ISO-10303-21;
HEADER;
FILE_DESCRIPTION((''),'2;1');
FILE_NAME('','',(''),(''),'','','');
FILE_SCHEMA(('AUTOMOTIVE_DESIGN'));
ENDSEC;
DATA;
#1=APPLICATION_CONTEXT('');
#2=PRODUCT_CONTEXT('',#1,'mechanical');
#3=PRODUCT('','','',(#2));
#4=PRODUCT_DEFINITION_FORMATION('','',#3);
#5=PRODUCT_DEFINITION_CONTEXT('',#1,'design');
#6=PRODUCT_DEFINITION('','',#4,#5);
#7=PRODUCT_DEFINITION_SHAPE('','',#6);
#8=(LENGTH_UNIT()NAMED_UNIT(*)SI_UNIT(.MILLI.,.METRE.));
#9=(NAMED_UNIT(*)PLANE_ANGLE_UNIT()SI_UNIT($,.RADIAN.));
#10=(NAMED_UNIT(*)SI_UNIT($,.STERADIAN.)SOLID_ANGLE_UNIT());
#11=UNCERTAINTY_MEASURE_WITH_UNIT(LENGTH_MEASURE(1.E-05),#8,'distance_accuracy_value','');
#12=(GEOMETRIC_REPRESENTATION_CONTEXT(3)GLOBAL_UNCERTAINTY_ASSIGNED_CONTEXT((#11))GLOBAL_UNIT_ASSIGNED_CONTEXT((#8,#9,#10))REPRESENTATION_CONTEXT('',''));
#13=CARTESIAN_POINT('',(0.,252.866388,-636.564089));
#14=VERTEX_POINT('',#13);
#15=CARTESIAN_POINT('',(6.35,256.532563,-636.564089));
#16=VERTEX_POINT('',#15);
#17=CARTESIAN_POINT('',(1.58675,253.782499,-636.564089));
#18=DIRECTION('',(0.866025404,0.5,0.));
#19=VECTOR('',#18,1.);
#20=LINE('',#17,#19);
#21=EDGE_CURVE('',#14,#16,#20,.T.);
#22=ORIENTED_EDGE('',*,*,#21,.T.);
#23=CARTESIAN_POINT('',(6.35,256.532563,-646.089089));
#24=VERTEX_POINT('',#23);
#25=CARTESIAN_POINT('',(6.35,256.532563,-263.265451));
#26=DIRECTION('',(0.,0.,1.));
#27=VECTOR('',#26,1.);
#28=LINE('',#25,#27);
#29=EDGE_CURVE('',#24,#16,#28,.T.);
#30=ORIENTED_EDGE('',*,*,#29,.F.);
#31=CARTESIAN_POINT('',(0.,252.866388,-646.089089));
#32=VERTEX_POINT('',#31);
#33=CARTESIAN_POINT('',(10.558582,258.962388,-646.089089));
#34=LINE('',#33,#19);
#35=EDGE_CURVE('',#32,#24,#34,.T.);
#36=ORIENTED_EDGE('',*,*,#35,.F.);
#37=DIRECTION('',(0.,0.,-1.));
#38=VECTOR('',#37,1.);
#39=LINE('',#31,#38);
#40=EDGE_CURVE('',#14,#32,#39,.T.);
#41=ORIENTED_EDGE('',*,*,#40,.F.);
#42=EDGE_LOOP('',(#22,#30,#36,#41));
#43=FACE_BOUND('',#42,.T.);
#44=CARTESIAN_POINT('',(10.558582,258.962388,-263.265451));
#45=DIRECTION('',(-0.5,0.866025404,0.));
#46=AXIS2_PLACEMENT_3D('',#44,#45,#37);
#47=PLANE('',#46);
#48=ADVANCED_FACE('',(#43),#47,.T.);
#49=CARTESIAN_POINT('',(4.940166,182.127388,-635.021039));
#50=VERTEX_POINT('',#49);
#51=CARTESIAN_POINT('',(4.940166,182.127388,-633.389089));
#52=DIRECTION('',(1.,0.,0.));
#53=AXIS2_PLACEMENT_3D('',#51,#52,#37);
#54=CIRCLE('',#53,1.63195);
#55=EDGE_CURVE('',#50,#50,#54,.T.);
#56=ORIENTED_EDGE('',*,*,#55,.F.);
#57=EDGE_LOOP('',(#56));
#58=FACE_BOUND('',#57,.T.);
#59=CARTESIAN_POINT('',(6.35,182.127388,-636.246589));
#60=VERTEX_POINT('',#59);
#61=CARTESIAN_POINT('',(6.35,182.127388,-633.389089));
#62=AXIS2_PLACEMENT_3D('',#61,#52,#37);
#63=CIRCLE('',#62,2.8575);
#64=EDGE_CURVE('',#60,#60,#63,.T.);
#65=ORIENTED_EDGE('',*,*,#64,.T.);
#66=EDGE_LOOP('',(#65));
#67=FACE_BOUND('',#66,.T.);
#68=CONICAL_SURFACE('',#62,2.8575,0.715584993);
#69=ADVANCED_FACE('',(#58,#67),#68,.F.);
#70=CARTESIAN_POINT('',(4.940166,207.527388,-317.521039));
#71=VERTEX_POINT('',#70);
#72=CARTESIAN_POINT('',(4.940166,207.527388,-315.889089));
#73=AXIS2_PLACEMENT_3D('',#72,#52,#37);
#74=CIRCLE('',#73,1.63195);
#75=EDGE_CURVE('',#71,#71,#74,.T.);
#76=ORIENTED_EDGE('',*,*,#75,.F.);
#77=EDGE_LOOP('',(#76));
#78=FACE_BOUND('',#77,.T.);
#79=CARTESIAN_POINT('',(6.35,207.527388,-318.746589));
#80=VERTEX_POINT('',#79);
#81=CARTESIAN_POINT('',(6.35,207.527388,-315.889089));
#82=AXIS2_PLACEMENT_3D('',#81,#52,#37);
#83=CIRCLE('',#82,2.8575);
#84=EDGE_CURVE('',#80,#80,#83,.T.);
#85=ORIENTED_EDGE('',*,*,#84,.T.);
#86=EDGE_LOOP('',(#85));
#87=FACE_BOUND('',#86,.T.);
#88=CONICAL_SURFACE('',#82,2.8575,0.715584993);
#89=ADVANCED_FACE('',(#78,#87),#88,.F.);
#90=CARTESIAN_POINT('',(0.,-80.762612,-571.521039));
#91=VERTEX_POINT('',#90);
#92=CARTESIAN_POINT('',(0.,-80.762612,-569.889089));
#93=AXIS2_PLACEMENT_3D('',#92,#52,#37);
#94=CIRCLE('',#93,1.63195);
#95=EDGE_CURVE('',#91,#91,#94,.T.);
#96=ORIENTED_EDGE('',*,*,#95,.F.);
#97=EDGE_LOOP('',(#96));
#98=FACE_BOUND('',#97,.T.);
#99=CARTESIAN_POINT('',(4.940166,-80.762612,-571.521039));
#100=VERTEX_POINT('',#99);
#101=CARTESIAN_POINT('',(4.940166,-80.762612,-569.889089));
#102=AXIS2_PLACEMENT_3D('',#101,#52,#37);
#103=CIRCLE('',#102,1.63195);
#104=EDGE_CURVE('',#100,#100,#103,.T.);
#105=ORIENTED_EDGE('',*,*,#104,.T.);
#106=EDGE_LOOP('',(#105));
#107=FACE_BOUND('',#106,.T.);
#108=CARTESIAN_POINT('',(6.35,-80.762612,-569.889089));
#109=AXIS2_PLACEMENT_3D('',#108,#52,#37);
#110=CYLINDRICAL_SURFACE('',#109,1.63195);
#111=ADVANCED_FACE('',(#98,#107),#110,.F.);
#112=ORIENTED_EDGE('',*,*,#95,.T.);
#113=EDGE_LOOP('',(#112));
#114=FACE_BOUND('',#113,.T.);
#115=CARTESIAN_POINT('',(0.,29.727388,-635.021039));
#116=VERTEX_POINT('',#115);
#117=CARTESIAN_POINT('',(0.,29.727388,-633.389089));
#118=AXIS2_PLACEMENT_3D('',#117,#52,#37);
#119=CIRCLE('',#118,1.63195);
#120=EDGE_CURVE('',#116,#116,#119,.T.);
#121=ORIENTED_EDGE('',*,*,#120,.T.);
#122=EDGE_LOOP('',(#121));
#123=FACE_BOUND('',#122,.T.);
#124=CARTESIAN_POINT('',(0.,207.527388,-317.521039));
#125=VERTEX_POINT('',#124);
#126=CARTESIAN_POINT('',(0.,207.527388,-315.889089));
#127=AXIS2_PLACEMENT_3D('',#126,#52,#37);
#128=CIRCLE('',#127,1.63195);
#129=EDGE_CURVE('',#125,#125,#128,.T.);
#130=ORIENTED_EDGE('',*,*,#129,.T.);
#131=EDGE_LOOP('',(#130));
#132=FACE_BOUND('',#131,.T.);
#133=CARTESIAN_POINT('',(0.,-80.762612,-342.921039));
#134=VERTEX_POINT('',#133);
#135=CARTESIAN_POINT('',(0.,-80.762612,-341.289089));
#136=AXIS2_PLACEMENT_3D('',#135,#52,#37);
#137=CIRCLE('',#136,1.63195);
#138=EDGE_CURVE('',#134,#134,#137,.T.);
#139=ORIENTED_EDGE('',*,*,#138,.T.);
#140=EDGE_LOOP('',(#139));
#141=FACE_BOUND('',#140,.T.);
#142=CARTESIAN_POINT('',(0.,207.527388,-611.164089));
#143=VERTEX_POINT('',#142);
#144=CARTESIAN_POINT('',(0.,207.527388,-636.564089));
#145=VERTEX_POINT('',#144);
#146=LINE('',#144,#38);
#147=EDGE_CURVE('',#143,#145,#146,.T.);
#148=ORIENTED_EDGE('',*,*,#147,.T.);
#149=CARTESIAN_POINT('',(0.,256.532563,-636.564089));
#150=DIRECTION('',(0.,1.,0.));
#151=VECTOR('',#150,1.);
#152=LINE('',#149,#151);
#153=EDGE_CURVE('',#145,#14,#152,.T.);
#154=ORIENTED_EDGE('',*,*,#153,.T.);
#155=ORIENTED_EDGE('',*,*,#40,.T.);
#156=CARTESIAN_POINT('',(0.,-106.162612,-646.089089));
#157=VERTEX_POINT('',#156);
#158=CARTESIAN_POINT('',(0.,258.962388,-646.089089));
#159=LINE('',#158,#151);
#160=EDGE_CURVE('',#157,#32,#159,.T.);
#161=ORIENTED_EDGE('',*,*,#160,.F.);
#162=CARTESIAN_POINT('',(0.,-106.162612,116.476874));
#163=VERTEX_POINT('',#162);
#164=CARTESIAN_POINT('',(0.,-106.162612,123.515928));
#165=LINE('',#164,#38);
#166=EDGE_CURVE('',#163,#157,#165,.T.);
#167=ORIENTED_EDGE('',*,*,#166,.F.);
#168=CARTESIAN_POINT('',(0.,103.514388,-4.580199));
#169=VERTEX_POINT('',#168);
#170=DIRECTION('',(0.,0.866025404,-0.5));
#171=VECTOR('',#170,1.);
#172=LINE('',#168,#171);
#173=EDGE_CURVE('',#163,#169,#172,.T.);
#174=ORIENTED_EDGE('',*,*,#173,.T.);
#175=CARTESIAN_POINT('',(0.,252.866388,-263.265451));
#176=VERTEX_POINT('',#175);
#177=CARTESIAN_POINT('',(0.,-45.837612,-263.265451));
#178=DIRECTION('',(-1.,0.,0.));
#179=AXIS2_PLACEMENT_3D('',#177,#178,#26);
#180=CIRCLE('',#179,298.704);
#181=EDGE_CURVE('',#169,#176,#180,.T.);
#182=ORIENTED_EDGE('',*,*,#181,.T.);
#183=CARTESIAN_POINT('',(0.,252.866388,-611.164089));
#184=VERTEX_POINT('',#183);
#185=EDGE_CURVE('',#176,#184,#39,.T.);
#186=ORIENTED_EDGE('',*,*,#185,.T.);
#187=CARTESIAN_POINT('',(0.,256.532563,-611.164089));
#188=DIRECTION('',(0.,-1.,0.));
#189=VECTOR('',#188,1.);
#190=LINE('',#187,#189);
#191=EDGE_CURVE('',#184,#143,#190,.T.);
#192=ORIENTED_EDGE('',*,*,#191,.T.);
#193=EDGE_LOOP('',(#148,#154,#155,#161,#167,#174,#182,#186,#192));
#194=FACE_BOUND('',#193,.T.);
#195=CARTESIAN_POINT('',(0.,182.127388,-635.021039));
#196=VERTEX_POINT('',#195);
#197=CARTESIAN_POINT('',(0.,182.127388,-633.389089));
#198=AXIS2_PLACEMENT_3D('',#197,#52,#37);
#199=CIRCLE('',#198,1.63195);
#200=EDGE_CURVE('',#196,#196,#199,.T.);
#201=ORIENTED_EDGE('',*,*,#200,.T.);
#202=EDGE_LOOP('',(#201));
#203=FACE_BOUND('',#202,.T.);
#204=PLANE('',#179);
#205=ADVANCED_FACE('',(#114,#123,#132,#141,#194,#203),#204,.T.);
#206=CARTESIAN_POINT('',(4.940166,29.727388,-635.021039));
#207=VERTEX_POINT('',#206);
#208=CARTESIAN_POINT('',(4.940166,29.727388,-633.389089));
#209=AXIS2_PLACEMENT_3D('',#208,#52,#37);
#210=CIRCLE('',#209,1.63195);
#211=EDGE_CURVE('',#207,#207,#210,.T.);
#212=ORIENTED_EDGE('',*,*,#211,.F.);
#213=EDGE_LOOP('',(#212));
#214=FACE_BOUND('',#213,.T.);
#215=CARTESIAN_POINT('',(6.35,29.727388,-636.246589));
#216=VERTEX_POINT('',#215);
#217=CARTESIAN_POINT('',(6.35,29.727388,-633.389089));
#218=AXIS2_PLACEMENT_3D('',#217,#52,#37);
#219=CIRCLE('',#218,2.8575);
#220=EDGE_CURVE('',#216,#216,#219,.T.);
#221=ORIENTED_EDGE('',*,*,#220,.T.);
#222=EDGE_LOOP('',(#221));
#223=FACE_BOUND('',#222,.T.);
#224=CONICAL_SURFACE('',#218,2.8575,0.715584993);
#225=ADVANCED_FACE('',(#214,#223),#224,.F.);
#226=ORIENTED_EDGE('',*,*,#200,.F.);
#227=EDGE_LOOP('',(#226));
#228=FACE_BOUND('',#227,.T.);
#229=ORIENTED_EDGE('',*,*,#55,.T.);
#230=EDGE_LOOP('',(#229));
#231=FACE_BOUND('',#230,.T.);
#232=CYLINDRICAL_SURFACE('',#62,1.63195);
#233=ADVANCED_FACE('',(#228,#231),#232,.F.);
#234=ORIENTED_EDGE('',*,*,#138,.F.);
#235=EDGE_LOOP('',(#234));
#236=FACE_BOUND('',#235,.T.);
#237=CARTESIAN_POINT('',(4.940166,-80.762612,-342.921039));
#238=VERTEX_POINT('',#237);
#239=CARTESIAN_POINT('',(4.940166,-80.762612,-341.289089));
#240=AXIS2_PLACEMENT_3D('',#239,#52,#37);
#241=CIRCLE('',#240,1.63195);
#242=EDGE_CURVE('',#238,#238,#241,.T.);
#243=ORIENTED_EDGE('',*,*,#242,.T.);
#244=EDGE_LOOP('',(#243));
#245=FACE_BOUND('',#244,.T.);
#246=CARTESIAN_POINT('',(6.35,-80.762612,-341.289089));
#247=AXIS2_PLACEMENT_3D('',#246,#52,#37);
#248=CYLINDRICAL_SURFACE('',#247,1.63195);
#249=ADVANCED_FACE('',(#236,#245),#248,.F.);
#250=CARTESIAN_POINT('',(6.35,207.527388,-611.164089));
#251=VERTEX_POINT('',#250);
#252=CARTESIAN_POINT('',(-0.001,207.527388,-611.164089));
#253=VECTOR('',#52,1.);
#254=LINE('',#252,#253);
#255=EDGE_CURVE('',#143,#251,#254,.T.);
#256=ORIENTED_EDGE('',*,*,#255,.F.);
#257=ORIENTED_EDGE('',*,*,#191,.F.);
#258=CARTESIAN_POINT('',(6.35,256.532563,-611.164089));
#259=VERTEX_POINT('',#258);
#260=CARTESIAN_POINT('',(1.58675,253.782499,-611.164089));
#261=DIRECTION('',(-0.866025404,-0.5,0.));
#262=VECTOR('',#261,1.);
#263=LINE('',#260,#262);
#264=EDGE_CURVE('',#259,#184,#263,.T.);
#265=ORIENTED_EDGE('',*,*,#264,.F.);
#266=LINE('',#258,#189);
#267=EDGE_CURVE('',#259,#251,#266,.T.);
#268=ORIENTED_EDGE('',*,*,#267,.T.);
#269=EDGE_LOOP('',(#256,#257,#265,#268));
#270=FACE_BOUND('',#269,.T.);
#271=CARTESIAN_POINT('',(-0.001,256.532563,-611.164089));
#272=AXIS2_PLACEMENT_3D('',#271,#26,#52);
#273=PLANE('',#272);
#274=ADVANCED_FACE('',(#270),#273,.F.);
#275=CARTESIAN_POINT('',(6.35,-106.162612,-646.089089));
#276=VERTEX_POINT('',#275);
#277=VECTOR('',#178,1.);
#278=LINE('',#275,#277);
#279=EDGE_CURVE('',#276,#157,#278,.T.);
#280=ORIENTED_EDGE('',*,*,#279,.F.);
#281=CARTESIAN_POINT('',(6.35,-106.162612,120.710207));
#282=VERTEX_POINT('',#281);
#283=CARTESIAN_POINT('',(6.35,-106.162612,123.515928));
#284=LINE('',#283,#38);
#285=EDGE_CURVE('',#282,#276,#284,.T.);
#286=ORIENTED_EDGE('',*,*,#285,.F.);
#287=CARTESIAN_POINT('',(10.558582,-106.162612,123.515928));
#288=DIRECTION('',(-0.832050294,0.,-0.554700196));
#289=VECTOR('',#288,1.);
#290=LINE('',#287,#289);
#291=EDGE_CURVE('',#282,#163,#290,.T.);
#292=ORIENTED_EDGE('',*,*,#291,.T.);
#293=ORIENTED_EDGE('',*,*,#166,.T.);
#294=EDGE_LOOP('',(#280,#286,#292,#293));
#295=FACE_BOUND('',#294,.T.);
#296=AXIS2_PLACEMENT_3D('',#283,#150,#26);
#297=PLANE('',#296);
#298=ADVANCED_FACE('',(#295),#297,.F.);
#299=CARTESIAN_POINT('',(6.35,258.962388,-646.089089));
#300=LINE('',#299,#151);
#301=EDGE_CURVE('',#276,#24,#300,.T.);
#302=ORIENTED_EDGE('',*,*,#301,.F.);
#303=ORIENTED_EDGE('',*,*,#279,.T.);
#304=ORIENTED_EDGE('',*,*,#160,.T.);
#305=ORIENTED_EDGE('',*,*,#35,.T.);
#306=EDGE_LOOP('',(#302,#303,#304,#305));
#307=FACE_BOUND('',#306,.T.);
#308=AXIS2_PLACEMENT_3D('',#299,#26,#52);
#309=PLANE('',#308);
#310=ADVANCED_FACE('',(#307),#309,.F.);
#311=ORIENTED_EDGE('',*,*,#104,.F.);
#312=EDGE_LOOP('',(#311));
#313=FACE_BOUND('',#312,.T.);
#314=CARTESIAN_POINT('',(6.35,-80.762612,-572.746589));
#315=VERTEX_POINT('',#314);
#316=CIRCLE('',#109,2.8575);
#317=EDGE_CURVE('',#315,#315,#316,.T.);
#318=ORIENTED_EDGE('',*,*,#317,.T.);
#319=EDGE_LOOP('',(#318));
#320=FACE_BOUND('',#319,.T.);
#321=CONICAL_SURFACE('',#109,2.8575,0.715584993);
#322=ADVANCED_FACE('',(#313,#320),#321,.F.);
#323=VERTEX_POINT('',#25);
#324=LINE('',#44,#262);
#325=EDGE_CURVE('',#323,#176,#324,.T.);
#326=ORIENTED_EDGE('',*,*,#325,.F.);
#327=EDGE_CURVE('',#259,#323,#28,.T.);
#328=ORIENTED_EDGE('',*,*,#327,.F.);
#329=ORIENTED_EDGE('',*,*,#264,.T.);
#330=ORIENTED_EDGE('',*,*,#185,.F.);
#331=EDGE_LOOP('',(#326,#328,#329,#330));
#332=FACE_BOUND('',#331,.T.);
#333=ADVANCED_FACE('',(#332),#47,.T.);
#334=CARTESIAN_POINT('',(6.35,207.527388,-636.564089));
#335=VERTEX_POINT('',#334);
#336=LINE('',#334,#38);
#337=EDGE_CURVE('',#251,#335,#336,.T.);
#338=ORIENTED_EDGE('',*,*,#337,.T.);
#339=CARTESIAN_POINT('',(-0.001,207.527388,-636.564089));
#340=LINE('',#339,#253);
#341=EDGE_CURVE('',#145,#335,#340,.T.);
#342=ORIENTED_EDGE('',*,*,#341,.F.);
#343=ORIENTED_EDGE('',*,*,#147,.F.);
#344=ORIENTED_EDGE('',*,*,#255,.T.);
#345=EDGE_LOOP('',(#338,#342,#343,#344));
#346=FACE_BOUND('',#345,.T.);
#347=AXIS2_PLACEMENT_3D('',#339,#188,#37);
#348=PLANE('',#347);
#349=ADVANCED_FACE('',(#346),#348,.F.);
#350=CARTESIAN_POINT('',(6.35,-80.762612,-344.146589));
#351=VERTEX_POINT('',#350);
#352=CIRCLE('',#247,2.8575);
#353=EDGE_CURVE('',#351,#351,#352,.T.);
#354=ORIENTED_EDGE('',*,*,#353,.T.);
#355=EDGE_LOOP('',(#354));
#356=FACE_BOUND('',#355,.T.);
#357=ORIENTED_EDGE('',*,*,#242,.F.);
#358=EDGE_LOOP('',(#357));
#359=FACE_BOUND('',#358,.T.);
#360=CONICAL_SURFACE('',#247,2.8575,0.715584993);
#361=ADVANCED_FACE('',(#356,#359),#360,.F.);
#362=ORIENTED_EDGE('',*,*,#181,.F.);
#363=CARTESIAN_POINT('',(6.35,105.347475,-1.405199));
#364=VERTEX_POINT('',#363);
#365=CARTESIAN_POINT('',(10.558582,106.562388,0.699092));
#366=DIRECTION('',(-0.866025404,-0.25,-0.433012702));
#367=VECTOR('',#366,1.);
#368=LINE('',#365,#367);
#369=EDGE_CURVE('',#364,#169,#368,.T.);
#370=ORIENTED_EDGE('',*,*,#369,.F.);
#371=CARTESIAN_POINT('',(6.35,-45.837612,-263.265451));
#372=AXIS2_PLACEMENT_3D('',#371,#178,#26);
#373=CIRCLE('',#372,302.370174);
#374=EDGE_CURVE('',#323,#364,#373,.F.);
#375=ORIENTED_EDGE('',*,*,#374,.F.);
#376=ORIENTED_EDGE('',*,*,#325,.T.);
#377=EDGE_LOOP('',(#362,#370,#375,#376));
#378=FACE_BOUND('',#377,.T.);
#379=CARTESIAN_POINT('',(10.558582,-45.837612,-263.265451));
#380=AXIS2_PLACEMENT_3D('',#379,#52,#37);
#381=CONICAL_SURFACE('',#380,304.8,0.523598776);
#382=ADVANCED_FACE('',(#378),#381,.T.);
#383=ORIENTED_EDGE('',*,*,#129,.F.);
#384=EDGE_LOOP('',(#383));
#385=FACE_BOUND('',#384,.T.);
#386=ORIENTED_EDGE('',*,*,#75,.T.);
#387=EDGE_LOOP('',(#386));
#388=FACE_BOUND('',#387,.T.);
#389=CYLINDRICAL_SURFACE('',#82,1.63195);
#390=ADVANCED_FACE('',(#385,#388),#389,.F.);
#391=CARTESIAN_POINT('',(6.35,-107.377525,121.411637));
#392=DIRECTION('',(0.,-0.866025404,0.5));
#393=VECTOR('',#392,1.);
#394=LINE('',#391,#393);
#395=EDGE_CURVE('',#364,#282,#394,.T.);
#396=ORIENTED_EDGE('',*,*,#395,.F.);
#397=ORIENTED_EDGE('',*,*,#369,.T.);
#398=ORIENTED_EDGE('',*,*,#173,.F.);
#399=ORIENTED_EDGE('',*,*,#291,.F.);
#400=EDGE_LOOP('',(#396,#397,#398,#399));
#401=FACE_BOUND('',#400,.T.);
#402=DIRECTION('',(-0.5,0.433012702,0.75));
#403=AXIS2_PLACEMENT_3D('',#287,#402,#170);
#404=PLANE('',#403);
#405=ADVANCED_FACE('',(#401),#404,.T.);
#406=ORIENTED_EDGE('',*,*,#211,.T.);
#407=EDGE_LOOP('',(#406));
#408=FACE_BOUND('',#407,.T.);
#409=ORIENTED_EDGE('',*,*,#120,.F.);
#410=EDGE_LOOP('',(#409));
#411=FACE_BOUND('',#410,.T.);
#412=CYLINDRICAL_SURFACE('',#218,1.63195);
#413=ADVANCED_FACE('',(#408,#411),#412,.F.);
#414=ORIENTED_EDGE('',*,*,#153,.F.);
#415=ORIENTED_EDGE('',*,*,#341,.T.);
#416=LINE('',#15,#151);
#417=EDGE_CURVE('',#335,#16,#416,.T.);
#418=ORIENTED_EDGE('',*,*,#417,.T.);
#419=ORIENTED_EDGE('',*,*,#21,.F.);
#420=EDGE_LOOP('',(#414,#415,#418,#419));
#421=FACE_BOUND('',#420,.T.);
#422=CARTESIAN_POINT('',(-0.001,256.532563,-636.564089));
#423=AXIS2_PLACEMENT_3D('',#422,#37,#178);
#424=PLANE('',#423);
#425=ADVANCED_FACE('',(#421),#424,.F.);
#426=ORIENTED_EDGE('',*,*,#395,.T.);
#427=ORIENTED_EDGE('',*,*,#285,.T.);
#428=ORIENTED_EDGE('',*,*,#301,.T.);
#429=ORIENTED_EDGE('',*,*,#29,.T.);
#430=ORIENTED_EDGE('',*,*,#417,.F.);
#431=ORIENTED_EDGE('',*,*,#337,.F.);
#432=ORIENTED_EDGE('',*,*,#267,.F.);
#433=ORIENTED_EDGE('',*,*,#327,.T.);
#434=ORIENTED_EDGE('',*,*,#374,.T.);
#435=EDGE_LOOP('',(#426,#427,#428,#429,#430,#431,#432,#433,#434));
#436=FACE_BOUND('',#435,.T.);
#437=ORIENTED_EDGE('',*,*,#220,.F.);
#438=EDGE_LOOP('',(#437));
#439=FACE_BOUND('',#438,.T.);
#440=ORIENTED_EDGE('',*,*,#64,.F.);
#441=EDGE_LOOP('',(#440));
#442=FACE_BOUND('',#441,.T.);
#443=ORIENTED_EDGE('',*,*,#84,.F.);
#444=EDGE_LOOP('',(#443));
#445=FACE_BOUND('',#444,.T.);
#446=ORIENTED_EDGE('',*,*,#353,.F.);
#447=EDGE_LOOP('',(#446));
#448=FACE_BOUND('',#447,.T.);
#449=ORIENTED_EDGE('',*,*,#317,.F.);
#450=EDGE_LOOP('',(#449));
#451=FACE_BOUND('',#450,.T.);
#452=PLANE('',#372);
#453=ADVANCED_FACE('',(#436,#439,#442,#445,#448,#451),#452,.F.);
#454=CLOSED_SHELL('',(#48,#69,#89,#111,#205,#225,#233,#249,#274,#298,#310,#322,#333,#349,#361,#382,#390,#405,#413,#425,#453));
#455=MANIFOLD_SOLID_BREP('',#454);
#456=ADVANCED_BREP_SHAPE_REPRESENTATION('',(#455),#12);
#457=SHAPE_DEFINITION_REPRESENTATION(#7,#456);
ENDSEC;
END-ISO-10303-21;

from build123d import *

# Parameters (mm, degrees)
BOSS_EXTRUDE1_DEPTH                            = 6.35
CSK_FOR_4_FLAT_HEAD_MACHINE_SCREW1_D           = 3.2639
CSK_FOR_4_FLAT_HEAD_MACHINE_SCREW1_CSINK_D     = 5.715
CSK_FOR_4_FLAT_HEAD_MACHINE_SCREW1_CSINK_ANGLE = 82
CSK_FOR_4_FLAT_HEAD_MACHINE_SCREW2_D           = 3.2639
CSK_FOR_4_FLAT_HEAD_MACHINE_SCREW2_CSINK_D     = 5.715
CSK_FOR_4_FLAT_HEAD_MACHINE_SCREW2_CSINK_ANGLE = 82
CHAMFER1_SIZE                                  = 10.558581723
CHAMFER1_SIZE_2                                = 6.096
CUT_EXTRUDE1_REACH                             = 697.184
SKETCH8_W                                      = 25.4
SKETCH8_H                                      = 49.00517421
CSK_FOR_4_FLAT_HEAD_MACHINE_SCREW3_D           = 3.2639
CSK_FOR_4_FLAT_HEAD_MACHINE_SCREW3_CSINK_D     = 5.715
CSK_FOR_4_FLAT_HEAD_MACHINE_SCREW3_CSINK_ANGLE = 82


with BuildPart() as part:
    # Sketch1 → Boss-Extrude1 (new body)
    with BuildSketch(Plane(origin=(0, 0, 0), x_dir=(0, 0, -1), z_dir=(1, 0, 0))):
        with BuildLine():
            Line((-123.515928009, -106.162611625), (-0.699091996, 106.562388375))
            ThreePointArc((-0.699091996, 106.562388375), (110.865451078, 218.126931449), (263.265451078, 258.962388375))
            Line((263.265451078, 258.962388375), (646.089089029, 258.962388375))
            Line((646.089089029, 258.962388375), (646.089089029, -106.162611625))
            Line((646.089089029, -106.162611625), (-123.515928009, -106.162611625))
        make_face()
    extrude(amount=BOSS_EXTRUDE1_DEPTH)

    # CSK for #4 Flat Head Machine Screw1 (through all)
    with Locations(Plane(origin=(6.35, 0, 0), x_dir=(0, 0, -1), z_dir=(1, 0, 0))):
        with Locations((633.389089029, 29.727388375)):
            CounterSinkHole(CSK_FOR_4_FLAT_HEAD_MACHINE_SCREW1_D / 2, CSK_FOR_4_FLAT_HEAD_MACHINE_SCREW1_CSINK_D / 2, counter_sink_angle=CSK_FOR_4_FLAT_HEAD_MACHINE_SCREW1_CSINK_ANGLE)

    # CSK for #4 Flat Head Machine Screw2 (through all)
    with Locations(Plane(origin=(6.35, 207.527388375, -315.889089029), x_dir=(0, 0, 1), z_dir=(1, 0, 0))):
        with Locations((0, 0), (-317.5, 25.4)):
            CounterSinkHole(CSK_FOR_4_FLAT_HEAD_MACHINE_SCREW2_D / 2, CSK_FOR_4_FLAT_HEAD_MACHINE_SCREW2_CSINK_D / 2, counter_sink_angle=CSK_FOR_4_FLAT_HEAD_MACHINE_SCREW2_CSINK_ANGLE)

    # Chamfer1
    # the kernel refuses this chamfer: 10.558581723, 6.096 mm, written as the material it takes off along each edge
    with BuildSketch(Plane(origin=(0, -129.818923765, 137.173906191), x_dir=(0.9998132206222078, 0.009663382806350982, 0.016737469993587533), z_dir=(0, 0.8660254037844402, -0.49999999999999756))) as chamfer1_piece_1:
        Polygon((CHAMFER1_SIZE * 0.999813220617, CHAMFER1_SIZE * 0.0193267656126), (-CHAMFER1_SIZE_2 * 0.0193267656127, CHAMFER1_SIZE_2 * 0.999813220622), (0, 0), align=None)
    extrude(amount=272.949628391, mode=Mode.SUBTRACT)
    with BuildSketch(Plane(origin=(0, -45.837611625, -263.265451078), x_dir=(0, 0.5000000000000027, 0.8660254037844372), z_dir=(0, -0.8660254037844372, 0.5000000000000027))) as chamfer1_piece_2:
        Polygon((304.8 - CHAMFER1_SIZE_2, 0), (304.8, -CHAMFER1_SIZE), (304.8, 0), align=None)
    revolve(axis=Axis((0, -45.837611625, -263.265451078), (-1, 0, 0)), revolution_arc=60, mode=Mode.SUBTRACT)
    with BuildSketch(Plane(origin=(0, 258.962388375, -263.265451078), x_dir=(0.9998132206222078, 0.01932676561270281, 0), z_dir=(0, 0, -1))) as chamfer1_piece_3:
        Polygon((CHAMFER1_SIZE * 0.999813220617, CHAMFER1_SIZE * 0.0193267656126), (-CHAMFER1_SIZE_2 * 0.0193267656127, CHAMFER1_SIZE_2 * 0.999813220622), (0, 0), align=None)
    extrude(amount=410.139594316, mode=Mode.SUBTRACT)

    # Sketch8 → Cut-Extrude1 (cut, up to next)
    with BuildSketch(Plane(origin=(6.35, 0, 0), x_dir=(0, 0, -1), z_dir=(1, 0, 0)), mode=Mode.PRIVATE) as cut_extrude1_sk1:
        with Locations((623.864089029, 232.02997548)):
            Rectangle(SKETCH8_W, SKETCH8_H)
    cut_extrude1_tool1 = extrude(cut_extrude1_sk1.sketch, amount=-CUT_EXTRUDE1_REACH, mode=Mode.PRIVATE) & part.part
    add(cut_extrude1_tool1.solids().sort_by_distance((6.35, 232.029975, -623.864089))[0], mode=Mode.SUBTRACT)

    # CSK for #4 Flat Head Machine Screw3 (through all)
    with Locations(Plane(origin=(6.35, -80.762611625, -569.889089029), x_dir=(0, 0, 1), z_dir=(1, 0, 0))):
        with Locations((0, 0), (228.6, 0)):
            CounterSinkHole(CSK_FOR_4_FLAT_HEAD_MACHINE_SCREW3_D / 2, CSK_FOR_4_FLAT_HEAD_MACHINE_SCREW3_CSINK_D / 2, counter_sink_angle=CSK_FOR_4_FLAT_HEAD_MACHINE_SCREW3_CSINK_ANGLE)


solid = part.part
